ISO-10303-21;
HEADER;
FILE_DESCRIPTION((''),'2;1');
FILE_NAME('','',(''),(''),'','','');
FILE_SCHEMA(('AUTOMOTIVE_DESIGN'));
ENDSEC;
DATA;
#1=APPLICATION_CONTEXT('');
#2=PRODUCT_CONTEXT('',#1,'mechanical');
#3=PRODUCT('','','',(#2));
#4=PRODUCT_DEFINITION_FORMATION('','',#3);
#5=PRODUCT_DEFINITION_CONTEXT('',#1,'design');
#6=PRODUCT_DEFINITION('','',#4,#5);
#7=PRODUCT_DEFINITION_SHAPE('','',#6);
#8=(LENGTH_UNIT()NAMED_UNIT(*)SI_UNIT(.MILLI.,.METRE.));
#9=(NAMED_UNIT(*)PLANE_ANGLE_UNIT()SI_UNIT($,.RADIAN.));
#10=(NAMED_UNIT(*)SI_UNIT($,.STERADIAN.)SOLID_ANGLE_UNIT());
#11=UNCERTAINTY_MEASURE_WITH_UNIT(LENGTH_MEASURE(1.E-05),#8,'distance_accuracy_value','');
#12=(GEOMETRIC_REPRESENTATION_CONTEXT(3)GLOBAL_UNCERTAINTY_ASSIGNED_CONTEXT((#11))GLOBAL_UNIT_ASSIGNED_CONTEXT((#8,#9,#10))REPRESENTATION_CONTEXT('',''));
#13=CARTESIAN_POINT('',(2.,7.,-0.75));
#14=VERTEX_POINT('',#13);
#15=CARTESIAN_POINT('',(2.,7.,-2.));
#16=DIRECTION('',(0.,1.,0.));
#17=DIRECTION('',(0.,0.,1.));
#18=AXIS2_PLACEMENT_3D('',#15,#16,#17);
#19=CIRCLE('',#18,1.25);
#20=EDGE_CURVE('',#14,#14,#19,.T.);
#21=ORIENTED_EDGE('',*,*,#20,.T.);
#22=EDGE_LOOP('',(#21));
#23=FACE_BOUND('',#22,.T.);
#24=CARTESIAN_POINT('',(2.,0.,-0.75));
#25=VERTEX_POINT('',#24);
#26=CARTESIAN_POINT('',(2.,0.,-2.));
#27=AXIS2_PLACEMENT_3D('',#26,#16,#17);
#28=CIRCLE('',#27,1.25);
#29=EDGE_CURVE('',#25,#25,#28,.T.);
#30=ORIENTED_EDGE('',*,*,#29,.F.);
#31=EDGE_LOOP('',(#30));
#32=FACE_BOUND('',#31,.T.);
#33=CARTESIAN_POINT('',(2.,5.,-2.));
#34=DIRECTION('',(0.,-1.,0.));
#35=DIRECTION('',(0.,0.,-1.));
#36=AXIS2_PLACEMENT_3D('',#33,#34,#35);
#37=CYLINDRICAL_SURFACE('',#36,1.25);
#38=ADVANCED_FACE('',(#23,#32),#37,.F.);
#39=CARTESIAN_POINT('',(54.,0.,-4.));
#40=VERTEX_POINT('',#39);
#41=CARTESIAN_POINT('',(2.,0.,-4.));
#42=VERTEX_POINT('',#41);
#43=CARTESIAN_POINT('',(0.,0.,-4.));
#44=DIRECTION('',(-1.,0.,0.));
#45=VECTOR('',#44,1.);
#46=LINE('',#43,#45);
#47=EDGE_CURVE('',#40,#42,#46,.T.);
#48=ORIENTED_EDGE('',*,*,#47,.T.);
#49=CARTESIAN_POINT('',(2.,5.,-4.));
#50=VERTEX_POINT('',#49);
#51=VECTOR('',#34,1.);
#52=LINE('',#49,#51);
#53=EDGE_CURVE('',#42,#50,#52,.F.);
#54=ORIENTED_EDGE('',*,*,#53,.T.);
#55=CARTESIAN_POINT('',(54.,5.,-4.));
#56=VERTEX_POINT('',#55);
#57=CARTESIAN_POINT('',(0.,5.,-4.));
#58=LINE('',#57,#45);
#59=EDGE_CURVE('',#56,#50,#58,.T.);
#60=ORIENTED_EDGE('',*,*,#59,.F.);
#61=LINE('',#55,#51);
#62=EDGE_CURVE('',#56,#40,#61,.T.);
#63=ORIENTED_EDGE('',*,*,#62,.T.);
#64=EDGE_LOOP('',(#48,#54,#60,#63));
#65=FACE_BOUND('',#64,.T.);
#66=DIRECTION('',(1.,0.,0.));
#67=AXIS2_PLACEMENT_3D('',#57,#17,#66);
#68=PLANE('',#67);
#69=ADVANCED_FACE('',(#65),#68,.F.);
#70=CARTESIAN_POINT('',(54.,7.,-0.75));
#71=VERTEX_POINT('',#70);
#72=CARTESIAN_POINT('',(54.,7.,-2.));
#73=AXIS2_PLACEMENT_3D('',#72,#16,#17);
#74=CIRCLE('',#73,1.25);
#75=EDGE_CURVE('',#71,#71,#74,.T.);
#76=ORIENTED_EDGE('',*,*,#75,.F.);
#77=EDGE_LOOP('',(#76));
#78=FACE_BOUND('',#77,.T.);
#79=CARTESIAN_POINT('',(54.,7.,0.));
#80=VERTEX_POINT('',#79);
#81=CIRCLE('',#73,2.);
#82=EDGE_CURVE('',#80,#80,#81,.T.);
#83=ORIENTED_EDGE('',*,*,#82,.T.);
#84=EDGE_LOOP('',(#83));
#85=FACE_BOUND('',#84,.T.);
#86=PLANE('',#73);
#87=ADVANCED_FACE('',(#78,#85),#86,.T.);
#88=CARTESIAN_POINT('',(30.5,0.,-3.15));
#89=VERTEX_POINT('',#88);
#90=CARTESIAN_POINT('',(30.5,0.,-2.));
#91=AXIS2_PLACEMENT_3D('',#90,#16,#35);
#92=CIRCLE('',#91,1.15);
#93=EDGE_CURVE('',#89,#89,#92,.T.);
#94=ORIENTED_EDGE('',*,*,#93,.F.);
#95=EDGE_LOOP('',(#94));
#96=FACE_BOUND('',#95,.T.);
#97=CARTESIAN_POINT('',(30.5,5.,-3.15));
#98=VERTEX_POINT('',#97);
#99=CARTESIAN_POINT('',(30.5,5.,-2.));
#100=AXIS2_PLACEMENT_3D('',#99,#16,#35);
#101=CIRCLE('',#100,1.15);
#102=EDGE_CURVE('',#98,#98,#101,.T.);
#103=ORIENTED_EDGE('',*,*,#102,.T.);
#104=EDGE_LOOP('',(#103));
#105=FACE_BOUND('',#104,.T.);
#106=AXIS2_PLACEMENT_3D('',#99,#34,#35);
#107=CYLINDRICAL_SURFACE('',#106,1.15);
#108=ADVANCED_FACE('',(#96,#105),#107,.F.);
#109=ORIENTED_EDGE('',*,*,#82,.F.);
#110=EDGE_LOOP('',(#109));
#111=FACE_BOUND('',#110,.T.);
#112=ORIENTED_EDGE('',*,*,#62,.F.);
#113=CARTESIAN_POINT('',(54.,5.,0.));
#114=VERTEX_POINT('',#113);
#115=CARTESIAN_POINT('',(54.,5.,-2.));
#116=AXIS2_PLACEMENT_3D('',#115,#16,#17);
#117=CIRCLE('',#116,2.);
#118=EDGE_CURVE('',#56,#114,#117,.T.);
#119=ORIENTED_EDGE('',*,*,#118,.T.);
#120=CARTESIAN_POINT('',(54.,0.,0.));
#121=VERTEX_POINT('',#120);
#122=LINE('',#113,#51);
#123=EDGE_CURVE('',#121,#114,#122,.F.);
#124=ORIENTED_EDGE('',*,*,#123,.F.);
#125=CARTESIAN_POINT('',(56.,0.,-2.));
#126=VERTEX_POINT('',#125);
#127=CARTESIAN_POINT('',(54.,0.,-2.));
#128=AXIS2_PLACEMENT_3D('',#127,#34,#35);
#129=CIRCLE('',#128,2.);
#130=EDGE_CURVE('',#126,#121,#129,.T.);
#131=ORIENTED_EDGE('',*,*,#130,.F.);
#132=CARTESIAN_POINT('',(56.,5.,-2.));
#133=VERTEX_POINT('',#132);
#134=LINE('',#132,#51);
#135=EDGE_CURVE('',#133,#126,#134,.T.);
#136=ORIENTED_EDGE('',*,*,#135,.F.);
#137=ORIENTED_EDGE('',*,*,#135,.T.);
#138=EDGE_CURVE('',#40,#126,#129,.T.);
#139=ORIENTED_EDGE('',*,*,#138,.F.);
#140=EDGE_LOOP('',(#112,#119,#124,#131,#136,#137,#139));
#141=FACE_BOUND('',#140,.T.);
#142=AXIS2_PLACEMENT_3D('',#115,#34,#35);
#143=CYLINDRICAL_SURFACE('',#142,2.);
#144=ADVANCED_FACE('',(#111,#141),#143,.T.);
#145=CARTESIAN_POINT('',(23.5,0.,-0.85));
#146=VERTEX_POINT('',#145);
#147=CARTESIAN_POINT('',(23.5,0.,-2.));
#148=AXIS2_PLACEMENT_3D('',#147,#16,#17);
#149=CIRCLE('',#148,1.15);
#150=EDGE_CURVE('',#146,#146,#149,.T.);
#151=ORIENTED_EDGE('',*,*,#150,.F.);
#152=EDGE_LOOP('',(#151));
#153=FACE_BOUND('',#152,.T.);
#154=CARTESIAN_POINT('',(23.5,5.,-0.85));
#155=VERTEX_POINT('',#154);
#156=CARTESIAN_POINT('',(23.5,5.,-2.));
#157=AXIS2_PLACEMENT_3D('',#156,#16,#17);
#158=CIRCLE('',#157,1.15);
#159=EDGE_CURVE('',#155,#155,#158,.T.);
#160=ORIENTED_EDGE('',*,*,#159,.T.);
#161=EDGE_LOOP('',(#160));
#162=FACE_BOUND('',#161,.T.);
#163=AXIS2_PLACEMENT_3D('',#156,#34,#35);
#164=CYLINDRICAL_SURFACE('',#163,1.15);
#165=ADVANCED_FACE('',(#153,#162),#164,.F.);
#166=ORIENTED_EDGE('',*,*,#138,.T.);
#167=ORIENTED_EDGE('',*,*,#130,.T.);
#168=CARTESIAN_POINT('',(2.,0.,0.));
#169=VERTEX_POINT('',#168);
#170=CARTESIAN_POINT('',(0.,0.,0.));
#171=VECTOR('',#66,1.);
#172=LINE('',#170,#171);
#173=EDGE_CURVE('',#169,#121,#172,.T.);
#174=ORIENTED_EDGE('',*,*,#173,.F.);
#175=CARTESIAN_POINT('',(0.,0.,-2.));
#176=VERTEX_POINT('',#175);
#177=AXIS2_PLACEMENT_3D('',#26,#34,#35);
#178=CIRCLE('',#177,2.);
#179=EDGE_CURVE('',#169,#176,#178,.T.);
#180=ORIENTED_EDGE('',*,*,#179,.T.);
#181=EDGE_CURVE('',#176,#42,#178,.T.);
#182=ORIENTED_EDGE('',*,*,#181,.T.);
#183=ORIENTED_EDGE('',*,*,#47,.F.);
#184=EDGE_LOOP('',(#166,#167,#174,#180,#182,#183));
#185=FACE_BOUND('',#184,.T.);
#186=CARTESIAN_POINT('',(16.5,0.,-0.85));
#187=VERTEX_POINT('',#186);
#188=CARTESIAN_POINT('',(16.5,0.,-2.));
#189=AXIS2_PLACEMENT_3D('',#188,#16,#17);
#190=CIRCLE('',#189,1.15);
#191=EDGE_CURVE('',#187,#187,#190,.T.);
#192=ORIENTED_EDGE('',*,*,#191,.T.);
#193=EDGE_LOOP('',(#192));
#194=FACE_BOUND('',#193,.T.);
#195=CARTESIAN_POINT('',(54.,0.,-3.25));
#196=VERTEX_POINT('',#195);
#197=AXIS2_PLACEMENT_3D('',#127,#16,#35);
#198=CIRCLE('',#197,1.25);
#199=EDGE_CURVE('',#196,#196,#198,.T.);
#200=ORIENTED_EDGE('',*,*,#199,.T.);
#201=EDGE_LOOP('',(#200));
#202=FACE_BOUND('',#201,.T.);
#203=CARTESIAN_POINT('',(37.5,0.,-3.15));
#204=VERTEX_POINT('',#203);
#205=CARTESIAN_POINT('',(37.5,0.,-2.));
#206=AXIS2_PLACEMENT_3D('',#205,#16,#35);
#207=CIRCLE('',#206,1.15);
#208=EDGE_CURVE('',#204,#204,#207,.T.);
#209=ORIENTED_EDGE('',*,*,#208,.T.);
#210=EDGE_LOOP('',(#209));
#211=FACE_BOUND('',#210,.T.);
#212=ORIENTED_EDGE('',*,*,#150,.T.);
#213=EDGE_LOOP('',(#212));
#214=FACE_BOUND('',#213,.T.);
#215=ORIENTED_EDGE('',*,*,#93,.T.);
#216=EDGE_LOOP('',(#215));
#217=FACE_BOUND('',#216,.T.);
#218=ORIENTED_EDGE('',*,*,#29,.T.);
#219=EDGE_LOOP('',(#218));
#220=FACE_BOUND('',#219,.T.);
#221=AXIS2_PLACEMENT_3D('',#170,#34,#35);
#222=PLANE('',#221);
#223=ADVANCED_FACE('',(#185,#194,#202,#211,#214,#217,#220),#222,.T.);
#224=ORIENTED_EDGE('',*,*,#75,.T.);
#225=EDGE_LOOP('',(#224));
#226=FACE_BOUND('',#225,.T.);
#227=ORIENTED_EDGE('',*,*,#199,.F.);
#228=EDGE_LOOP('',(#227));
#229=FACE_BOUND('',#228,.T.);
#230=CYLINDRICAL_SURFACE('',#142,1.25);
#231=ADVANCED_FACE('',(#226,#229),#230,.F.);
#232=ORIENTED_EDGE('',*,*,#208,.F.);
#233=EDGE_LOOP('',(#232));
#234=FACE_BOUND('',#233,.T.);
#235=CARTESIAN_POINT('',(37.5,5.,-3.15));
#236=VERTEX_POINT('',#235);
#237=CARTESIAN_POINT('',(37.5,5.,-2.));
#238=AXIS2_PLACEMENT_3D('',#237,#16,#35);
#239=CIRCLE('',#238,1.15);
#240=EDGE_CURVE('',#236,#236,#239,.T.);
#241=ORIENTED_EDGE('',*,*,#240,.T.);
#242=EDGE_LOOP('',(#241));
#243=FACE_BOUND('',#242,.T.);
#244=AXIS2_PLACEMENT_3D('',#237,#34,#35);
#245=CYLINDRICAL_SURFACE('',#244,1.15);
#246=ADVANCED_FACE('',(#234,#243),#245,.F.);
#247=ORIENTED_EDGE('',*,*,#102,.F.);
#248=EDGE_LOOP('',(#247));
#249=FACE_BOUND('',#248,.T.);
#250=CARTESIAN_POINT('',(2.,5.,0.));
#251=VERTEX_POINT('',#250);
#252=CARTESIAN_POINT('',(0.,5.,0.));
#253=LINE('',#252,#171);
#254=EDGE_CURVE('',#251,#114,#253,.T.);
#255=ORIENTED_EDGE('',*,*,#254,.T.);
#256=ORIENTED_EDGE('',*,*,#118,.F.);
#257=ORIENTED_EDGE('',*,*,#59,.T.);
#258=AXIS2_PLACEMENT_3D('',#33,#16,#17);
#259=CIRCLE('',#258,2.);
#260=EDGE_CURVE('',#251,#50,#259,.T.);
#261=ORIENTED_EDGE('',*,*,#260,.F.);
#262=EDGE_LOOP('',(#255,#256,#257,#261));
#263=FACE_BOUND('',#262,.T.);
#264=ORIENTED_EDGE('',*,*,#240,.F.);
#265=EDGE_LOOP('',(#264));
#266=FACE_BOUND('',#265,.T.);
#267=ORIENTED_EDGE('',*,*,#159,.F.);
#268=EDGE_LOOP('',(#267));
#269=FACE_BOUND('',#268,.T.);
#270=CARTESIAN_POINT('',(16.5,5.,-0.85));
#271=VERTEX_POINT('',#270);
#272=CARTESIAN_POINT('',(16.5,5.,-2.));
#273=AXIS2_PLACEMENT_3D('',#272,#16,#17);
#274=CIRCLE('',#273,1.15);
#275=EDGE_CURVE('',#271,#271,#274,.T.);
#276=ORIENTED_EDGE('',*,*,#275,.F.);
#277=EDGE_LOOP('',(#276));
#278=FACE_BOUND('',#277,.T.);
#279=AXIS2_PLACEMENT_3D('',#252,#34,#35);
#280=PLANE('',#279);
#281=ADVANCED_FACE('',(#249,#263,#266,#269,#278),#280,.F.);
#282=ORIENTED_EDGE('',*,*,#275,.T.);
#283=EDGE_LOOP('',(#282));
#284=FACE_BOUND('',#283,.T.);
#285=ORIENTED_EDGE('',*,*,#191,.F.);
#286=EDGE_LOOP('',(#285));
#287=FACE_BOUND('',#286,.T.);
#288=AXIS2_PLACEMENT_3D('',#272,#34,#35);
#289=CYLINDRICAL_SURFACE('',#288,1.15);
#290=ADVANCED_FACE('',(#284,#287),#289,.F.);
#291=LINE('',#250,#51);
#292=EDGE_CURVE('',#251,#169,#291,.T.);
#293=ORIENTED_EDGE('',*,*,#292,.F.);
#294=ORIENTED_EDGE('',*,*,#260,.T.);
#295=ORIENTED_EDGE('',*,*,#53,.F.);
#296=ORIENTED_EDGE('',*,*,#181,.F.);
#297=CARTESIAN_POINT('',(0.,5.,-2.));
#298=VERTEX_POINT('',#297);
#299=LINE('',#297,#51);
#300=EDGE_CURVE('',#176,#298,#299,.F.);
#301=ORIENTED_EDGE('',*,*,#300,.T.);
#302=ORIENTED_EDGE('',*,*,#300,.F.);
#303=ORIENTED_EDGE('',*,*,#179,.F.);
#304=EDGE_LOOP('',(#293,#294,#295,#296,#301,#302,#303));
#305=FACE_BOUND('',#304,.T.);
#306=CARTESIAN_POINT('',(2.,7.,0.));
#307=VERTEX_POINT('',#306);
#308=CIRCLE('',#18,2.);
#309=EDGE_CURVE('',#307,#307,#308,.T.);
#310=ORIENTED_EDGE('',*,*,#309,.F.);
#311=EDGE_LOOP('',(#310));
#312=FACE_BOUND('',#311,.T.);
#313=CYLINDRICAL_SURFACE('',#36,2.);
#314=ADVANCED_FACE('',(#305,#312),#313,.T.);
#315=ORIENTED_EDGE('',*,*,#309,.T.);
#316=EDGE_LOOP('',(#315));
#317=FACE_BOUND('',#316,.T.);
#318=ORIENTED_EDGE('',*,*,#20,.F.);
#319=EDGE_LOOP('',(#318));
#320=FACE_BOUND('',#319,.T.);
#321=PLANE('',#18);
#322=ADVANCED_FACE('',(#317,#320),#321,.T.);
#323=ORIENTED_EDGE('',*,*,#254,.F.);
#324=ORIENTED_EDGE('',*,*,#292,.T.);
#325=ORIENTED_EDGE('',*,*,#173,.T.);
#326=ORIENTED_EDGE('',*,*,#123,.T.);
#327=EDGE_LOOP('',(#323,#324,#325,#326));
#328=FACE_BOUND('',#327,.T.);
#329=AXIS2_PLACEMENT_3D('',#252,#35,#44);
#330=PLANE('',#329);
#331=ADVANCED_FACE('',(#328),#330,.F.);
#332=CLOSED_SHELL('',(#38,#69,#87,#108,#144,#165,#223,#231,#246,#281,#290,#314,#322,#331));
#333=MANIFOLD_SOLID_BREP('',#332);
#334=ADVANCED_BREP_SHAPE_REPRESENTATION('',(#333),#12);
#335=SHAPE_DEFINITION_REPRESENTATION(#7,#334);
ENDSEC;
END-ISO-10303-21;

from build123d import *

# Parameters (mm, degrees)
SKETCH1_W           = 56
SKETCH1_H           = 4
SKETCH1_R           = 1.25
SKETCH1_R_2         = 1.15
BOSS_EXTRUDE1_DEPTH = 5
FILLET1_R           = 2
SKETCH2_R           = 2
SKETCH2_R_2         = 1.25
BOSS_EXTRUDE2_DEPTH = 2


with BuildPart() as part:
    # Sketch1 → Boss-Extrude1 (new body)
    with BuildSketch(Plane(origin=(0, 0, 0), x_dir=(1, 0, 0), z_dir=(0, 1, 0))):
        with Locations((28, 2)):
            Rectangle(SKETCH1_W, SKETCH1_H)
        with Locations(Location((2, 2, 0), (0, 0, 270))):
            Circle(SKETCH1_R, mode=Mode.SUBTRACT)
        with Locations(Location((16.5, 2, 0), (0, 0, 270))):
            Circle(SKETCH1_R_2, mode=Mode.SUBTRACT)
        with Locations(Location((23.5, 2, 0), (0, 0, 270))):
            Circle(SKETCH1_R_2, mode=Mode.SUBTRACT)
        with Locations(Location((54, 2, 0), (0, 0, 90))):
            Circle(SKETCH1_R, mode=Mode.SUBTRACT)
        with Locations(Location((30.5, 2, 0), (0, 0, 90))):
            Circle(SKETCH1_R_2, mode=Mode.SUBTRACT)
        with Locations(Location((37.5, 2, 0), (0, 0, 90))):
            Circle(SKETCH1_R_2, mode=Mode.SUBTRACT)
    extrude(amount=BOSS_EXTRUDE1_DEPTH)

    # Fillet1
    fillet1_edges = [part.edges().sort_by_distance(p)[0] for p in [
        (56, 2.5, -4),
        (56, 2.5, 0),
        (0, 2.5, -4),
        (0, 2.5, 0),
    ]]
    fillet(fillet1_edges, radius=FILLET1_R - 0.0001)  # a hair under: the kernel refuses the full size

    # Sketch2 → Boss-Extrude2 (add)
    # profile 1 of 2: a face of its own
    with BuildSketch(Plane(origin=(0, 5, 0), x_dir=(1, 0, 0), z_dir=(0, 1, 0))):
        with Locations(Location((2, 2, 0), (0, 0, 270))):
            Circle(SKETCH2_R)
        with Locations(Location((2, 2, 0), (0, 0, 270))):
            Circle(SKETCH2_R_2, mode=Mode.SUBTRACT)
    # profile 2 of 2: a face of its own
    with BuildSketch(Plane(origin=(0, 5, 0), x_dir=(1, 0, 0), z_dir=(0, 1, 0))):
        with Locations(Location((54, 2, 0), (0, 0, 270))):
            Circle(SKETCH2_R)
        with Locations(Location((54, 2, 0), (0, 0, 90))):
            Circle(SKETCH2_R_2, mode=Mode.SUBTRACT)
    extrude(amount=BOSS_EXTRUDE2_DEPTH)


solid = part.part
